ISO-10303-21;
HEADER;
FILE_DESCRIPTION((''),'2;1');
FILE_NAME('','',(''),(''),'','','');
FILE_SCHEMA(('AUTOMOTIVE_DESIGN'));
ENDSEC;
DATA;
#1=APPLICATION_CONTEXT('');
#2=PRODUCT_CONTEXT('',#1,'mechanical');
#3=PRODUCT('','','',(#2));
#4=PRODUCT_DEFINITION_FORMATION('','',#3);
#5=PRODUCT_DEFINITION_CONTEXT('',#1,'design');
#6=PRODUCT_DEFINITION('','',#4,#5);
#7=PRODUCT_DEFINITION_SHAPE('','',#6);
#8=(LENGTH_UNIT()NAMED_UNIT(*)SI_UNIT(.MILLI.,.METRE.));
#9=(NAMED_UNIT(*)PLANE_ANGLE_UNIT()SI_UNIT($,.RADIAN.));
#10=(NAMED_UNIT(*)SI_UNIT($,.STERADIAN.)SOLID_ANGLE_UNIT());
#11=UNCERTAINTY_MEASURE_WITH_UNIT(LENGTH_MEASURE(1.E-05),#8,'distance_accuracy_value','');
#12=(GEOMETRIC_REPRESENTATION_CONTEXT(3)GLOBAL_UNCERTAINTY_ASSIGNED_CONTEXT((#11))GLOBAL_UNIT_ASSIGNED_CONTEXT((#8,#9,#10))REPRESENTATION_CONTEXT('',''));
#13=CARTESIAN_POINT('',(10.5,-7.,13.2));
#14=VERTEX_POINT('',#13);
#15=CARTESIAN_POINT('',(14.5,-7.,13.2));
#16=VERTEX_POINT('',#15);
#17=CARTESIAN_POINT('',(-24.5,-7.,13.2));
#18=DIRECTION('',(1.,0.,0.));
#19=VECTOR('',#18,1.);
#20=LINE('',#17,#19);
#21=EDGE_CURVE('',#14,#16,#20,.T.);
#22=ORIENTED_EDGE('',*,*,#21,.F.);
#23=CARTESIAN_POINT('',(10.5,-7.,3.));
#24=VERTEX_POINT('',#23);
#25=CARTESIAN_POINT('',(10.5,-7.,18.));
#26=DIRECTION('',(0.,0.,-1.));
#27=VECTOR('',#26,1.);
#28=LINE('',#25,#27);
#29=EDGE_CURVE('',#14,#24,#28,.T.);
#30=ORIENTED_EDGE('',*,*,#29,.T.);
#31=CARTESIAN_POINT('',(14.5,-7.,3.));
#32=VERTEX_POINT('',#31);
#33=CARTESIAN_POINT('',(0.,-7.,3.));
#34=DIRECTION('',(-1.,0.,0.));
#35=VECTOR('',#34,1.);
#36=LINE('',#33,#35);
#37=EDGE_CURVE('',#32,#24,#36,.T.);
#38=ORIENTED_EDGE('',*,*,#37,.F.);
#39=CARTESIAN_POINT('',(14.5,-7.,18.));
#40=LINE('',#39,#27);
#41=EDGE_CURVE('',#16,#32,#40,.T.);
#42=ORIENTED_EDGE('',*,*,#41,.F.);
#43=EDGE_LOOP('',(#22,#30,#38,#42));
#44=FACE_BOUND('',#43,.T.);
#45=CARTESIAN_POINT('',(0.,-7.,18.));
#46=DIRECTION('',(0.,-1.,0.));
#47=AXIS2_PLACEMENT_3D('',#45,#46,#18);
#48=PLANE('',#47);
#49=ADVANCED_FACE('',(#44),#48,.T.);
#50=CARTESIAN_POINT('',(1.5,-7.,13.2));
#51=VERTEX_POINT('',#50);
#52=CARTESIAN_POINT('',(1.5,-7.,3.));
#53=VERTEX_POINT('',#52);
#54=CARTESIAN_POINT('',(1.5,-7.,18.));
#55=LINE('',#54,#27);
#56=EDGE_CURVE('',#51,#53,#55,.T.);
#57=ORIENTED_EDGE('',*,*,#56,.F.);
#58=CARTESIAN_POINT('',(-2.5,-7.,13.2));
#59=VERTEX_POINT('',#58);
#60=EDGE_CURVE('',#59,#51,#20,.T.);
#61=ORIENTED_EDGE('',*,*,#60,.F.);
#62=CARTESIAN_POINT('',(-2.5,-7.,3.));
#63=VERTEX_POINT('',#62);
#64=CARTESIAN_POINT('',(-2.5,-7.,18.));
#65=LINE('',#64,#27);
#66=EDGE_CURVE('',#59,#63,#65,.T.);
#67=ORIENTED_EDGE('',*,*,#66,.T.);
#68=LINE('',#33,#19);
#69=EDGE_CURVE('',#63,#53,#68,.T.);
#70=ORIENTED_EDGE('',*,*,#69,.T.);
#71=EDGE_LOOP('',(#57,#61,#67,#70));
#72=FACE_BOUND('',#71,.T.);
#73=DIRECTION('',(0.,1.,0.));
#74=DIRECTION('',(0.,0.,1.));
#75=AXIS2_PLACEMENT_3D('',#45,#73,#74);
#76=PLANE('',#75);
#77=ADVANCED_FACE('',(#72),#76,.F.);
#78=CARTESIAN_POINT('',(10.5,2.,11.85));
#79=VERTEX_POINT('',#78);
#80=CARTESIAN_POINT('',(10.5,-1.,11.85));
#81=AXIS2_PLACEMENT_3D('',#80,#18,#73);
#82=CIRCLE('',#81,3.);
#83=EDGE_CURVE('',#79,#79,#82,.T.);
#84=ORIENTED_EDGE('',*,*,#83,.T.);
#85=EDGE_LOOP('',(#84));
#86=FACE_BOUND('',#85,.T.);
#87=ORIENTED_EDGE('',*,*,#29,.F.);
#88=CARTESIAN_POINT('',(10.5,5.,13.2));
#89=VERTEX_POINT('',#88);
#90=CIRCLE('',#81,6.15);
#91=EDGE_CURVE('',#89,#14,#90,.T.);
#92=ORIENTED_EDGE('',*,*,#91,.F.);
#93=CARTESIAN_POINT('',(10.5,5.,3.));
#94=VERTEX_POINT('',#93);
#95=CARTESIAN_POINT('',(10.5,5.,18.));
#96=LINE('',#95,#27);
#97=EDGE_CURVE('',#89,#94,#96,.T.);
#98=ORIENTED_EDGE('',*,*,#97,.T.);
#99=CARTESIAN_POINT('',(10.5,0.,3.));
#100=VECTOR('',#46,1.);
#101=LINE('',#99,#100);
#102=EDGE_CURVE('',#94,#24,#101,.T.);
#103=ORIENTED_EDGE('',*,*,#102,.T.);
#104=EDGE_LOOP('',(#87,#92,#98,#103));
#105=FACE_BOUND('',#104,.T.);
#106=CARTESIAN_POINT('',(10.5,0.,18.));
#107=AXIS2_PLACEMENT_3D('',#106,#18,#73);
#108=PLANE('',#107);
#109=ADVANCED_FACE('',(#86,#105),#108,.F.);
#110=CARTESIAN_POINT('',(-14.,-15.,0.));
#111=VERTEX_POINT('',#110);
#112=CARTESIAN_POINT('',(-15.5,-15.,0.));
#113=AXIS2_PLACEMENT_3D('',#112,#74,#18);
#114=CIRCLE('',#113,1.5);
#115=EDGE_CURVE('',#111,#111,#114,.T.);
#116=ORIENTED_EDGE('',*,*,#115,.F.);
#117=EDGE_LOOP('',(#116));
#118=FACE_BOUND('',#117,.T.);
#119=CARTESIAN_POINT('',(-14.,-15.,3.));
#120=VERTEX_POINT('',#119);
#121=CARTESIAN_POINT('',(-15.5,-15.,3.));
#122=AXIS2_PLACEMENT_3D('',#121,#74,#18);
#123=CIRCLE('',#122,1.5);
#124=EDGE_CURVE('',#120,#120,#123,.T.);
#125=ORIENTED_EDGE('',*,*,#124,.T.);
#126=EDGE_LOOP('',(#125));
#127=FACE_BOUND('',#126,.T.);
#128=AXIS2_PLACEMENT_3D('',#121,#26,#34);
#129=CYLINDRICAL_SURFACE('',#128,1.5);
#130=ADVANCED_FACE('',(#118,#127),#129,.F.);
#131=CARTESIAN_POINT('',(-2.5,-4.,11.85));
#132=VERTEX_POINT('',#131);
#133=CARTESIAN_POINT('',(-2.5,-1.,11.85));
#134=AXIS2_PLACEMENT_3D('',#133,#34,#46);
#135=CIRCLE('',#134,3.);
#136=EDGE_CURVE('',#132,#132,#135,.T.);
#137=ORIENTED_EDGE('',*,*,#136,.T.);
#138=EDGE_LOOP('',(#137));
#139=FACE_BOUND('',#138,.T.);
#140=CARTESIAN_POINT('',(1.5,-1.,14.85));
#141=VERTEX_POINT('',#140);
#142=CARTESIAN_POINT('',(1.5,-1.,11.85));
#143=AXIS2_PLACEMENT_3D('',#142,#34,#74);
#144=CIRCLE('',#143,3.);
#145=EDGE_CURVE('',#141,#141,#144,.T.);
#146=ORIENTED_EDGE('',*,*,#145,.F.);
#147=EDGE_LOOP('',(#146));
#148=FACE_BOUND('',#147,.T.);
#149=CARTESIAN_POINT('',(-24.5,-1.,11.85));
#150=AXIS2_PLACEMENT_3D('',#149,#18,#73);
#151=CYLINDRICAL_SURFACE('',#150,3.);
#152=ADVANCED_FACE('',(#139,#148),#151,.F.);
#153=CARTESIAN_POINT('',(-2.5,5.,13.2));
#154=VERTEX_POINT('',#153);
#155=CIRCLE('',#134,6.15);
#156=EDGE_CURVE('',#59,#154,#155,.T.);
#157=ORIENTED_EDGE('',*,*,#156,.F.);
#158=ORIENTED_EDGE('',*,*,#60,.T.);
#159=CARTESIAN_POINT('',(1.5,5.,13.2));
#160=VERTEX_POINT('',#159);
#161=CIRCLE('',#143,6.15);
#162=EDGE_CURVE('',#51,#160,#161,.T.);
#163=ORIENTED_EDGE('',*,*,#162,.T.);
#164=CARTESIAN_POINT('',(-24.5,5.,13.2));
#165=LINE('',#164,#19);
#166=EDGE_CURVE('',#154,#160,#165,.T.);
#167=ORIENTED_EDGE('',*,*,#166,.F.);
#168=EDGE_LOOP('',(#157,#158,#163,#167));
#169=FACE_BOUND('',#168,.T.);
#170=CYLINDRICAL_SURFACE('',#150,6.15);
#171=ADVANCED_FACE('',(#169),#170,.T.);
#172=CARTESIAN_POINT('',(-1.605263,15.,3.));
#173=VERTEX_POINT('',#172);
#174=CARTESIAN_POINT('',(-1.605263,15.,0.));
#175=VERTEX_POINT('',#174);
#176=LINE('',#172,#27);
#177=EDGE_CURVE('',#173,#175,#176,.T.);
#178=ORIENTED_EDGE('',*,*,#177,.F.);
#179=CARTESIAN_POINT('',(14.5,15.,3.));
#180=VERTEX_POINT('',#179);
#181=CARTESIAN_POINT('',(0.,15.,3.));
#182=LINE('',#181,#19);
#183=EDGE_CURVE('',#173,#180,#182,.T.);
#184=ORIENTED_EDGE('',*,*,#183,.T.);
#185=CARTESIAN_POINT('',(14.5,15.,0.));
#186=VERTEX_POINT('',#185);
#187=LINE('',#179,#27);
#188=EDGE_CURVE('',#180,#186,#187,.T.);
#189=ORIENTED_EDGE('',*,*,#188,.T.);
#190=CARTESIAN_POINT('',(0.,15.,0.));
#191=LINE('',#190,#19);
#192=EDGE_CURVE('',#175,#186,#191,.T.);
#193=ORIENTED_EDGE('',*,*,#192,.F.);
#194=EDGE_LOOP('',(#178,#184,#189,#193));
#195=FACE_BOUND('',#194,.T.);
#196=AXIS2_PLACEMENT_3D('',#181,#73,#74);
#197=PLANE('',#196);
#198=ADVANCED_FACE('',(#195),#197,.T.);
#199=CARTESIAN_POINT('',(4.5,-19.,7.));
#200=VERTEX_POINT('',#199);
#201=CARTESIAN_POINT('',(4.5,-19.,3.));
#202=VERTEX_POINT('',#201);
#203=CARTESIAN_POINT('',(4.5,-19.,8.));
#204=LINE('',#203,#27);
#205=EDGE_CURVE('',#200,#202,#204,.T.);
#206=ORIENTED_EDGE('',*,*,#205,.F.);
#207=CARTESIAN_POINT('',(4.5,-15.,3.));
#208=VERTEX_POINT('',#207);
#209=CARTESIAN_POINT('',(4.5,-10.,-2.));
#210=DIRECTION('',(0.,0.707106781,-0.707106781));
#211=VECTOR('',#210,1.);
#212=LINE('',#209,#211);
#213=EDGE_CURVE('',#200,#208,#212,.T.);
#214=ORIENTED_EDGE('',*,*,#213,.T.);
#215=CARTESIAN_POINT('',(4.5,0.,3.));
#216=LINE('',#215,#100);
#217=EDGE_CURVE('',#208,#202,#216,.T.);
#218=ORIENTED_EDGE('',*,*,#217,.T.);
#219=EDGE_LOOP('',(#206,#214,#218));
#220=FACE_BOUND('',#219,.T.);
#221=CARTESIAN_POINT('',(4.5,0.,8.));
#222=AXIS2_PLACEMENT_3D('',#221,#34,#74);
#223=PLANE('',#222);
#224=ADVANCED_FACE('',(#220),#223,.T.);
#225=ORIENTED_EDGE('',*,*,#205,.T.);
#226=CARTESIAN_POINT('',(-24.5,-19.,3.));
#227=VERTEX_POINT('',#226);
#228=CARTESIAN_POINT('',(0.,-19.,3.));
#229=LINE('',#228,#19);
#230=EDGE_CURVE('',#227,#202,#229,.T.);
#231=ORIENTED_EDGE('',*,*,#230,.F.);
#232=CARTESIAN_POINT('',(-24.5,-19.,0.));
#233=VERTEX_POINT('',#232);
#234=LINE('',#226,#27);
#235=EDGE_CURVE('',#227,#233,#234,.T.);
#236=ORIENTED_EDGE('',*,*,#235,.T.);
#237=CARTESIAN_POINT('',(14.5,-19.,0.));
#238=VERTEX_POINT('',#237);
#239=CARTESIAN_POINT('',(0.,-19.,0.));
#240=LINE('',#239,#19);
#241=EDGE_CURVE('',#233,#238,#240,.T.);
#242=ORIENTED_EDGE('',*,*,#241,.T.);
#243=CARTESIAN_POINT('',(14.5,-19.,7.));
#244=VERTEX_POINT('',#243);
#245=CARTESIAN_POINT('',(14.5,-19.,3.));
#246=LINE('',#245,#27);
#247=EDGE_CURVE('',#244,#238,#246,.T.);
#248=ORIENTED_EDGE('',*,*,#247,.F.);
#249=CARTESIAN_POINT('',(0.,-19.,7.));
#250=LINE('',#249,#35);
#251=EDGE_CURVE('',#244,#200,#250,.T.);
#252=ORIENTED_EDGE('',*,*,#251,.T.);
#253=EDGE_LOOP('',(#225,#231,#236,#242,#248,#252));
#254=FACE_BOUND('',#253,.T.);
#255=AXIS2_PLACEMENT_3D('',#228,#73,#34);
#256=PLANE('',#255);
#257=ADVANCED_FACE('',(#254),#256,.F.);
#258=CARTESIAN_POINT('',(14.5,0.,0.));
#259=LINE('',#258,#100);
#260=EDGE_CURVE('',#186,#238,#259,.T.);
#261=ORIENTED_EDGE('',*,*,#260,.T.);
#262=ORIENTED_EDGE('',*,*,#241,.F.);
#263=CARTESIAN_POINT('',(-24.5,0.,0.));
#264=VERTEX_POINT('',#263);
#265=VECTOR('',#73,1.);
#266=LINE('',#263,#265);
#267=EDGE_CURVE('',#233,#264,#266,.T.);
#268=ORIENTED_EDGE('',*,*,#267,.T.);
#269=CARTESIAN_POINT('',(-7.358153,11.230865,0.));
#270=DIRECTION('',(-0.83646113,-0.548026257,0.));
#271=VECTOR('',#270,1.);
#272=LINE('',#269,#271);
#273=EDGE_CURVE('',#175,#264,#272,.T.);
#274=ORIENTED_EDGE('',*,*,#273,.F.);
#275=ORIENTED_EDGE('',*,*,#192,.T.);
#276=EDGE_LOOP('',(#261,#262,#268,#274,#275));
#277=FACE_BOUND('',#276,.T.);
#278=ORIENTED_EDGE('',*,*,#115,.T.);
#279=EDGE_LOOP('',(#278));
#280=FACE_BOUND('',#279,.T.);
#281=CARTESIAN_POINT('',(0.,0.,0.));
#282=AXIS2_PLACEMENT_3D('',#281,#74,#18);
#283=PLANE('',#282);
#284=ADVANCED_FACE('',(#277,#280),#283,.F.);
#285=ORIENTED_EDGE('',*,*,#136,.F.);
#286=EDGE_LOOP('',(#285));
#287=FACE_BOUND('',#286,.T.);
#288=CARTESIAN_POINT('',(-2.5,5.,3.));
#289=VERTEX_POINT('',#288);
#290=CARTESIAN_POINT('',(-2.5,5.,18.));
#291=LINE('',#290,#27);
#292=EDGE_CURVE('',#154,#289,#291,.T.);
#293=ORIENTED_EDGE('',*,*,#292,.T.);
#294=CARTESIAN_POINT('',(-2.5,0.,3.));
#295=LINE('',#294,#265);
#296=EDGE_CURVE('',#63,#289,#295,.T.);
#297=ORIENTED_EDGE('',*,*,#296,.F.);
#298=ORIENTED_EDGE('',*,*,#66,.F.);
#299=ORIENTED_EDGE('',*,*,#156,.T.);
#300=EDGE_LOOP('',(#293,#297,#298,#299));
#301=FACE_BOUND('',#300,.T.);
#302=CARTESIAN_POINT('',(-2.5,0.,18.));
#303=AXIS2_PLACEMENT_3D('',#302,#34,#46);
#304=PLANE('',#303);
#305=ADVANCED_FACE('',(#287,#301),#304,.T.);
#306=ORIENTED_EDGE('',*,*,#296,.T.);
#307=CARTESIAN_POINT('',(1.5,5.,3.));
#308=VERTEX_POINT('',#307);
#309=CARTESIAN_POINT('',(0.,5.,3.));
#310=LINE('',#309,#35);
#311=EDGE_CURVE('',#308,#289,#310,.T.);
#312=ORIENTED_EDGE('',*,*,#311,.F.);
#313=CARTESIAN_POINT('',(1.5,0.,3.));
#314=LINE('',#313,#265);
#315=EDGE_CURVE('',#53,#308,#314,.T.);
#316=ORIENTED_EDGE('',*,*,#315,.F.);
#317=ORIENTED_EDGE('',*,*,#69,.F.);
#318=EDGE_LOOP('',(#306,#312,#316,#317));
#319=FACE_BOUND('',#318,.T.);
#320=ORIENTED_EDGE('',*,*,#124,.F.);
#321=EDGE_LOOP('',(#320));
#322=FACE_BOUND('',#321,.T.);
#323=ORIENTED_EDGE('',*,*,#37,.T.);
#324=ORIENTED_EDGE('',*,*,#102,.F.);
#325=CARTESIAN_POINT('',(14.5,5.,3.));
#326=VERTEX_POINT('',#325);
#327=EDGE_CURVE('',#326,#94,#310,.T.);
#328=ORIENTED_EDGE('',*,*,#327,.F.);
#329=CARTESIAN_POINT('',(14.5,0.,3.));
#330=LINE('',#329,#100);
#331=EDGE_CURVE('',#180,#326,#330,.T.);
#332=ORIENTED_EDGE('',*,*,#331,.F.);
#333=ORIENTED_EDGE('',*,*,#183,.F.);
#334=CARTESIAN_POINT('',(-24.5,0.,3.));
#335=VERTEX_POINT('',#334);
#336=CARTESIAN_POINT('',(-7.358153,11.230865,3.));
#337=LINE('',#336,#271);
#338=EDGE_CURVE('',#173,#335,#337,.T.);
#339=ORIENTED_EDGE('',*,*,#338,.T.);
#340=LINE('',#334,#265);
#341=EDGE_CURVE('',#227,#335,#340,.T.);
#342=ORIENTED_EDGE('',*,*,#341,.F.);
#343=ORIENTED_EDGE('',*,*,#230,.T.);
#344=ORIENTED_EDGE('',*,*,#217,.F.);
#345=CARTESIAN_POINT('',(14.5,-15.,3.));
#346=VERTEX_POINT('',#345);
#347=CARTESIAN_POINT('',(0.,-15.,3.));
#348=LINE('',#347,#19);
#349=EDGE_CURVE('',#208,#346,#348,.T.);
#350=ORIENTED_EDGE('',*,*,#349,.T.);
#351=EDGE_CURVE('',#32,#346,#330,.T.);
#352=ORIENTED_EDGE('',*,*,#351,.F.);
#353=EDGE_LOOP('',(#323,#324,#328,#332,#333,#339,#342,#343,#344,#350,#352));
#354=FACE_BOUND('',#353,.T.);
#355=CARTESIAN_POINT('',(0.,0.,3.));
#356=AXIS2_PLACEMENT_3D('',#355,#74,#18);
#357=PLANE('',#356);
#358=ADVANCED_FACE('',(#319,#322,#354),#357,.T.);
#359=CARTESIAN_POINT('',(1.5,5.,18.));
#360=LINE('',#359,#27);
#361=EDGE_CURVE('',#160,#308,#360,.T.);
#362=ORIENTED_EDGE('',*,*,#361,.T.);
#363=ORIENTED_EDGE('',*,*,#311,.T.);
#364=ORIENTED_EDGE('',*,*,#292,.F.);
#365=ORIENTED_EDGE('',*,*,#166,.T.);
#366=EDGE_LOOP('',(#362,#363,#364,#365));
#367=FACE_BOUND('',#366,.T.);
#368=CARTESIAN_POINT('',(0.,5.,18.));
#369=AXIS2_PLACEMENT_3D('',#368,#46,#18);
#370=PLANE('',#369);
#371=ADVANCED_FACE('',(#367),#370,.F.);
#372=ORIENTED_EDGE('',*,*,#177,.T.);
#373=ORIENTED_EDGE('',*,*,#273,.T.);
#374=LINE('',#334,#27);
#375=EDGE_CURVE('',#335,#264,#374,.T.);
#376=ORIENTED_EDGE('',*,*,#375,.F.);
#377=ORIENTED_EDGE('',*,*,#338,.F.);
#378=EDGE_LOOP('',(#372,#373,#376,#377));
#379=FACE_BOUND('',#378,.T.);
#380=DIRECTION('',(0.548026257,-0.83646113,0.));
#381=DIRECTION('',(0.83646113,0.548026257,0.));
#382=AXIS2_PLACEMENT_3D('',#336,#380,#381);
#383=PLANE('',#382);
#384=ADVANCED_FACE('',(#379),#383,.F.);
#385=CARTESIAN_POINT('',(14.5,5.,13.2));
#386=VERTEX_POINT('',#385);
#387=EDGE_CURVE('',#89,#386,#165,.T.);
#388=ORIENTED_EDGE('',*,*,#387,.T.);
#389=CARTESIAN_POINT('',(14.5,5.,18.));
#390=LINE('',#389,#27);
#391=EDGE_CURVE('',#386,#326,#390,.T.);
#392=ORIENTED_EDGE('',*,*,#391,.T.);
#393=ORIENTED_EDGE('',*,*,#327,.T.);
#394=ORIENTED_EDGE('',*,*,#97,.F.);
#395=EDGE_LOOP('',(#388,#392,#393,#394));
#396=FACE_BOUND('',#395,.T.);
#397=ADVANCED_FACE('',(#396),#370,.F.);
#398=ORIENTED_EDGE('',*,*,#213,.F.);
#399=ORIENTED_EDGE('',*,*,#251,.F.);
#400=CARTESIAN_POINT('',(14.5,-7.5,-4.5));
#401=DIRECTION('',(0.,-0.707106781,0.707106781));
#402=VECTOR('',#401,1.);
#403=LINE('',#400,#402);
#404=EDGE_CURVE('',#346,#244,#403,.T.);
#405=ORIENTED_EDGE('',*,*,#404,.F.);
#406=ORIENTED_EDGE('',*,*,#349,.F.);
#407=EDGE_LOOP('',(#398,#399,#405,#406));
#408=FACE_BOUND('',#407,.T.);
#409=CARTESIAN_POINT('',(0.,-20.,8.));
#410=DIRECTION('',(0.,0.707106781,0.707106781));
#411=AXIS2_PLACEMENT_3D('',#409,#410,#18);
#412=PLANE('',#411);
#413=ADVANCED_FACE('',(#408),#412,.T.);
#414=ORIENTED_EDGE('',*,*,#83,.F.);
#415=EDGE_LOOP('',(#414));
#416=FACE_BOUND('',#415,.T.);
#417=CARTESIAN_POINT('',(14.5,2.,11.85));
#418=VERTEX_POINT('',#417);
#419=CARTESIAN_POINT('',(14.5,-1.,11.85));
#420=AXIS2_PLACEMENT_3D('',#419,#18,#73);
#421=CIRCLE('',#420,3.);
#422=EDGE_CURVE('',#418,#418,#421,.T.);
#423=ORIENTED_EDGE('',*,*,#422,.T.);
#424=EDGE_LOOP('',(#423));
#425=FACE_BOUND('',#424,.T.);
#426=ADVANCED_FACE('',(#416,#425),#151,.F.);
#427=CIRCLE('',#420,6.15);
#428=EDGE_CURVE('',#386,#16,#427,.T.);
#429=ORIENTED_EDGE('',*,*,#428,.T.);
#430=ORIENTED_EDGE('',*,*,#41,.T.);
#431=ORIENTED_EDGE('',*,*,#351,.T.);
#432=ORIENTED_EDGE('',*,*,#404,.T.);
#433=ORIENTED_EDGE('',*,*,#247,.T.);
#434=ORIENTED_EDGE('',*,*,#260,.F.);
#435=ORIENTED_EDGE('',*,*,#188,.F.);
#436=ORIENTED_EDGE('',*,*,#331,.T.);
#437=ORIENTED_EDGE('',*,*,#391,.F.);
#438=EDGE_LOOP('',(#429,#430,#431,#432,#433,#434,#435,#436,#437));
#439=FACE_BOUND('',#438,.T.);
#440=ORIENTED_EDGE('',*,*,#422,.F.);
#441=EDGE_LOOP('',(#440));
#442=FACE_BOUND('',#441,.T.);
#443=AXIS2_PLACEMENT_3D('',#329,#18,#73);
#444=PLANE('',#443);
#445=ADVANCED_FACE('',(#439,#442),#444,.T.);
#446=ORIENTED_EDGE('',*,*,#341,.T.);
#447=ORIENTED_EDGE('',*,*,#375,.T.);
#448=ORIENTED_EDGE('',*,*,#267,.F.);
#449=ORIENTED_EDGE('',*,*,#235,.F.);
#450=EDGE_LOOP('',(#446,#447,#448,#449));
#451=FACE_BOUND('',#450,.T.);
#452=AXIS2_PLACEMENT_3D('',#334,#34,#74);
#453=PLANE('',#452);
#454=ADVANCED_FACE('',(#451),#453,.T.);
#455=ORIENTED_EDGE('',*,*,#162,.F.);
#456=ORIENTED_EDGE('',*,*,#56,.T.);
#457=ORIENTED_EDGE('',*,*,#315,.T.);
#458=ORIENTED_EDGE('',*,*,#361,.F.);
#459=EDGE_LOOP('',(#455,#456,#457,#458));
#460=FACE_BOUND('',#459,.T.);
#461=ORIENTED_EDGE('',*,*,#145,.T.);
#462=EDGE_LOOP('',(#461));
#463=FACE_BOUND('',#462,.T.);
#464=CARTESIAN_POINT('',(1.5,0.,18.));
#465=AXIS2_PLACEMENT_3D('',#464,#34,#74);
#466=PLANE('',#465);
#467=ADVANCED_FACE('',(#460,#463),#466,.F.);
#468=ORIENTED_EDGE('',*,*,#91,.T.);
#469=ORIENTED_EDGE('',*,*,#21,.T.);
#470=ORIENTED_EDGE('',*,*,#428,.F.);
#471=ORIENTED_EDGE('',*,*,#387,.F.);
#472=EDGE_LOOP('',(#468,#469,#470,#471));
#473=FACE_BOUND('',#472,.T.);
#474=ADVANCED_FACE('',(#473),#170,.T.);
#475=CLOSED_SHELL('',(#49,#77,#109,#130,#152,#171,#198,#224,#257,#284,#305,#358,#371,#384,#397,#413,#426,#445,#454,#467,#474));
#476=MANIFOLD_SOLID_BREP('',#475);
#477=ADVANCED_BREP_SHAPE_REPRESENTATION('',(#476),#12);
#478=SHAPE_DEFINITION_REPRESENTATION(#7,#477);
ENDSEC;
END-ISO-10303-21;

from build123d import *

# Parameters (mm, degrees)
ESBO_O1_W                  = 10
ESBO_O1_H                  = 4
RESSALTO_EXTRUS_O1_DEPTH   = 3
ESBO_O1_8_W                = 4
ESBO_O1_8_H                = 12
RESSALTO_EXTRUS_O2_DEPTH   = 18
CORTE_EXTRUS_O1_DEPTH      = 47.968074263
CORTE_EXTRUS_O1_DEPTH_BACK = 47.968074263
ESBO_O2_R                  = 3
ESBO_O1_9_W                = 10
ESBO_O1_9_H                = 4
RESSALTO_EXTRUS_O3_DEPTH   = 8
CHANFRO1_SIZE              = 5


with BuildPart() as part:
    # Esboço1 → Ressalto-extrusão1 (new body)
    # profile 1 of 2: a face of its own
    with BuildSketch(Plane.XY):
        Polygon((-24.5, -15), (-24.5, -19), (-15.5, -19), (4.5, -19), (4.5, -15), (14.5, -15), (14.5, -7), (10.5, -7), (10.5, 5), (14.5, 5), (14.5, 15), (1.5, 15), (-1.605263158, 15), (-24.5, 0), align=None)
        with BuildLine():
            ThreePointArc((-15.5, -16.5), (-16.560660172, -16.060660172), (-17, -15))
            ThreePointArc((-17, -15), (-15.5, -13.5), (-14, -15))
            ThreePointArc((-14, -15), (-14.439339828, -16.060660172), (-15.5, -16.5))
        make_face(mode=Mode.SUBTRACT)
        Polygon((-2.5, 5), (1.5, 5), (1.5, -7), (-2.5, -7), (-2.5, 0), align=None, mode=Mode.SUBTRACT)
    # profile 2 of 2: a face of its own
    with BuildSketch(Plane.XY):
        with Locations((9.5, -17)):
            Rectangle(ESBO_O1_W, ESBO_O1_H)
    extrude(amount=RESSALTO_EXTRUS_O1_DEPTH)

    # Esboço1<8> → Ressalto-extrusão2 (add)
    with BuildSketch(Plane.XY):
        Polygon((10.5, -7), (14.5, -7), (14.5, -2), (14.5, 5), (10.5, 5), align=None)
        with Locations((-0.5, -1)):
            Rectangle(ESBO_O1_8_W, ESBO_O1_8_H)
    extrude(amount=RESSALTO_EXTRUS_O2_DEPTH)

    # Esboço2 → Corte-extrusão1 (cut, two sides: drawn at the far end of the back side and taken through both)
    with BuildSketch(Plane(origin=(14.5, 0, 0), x_dir=(0, 0, -1), z_dir=(1, 0, 0)).offset(-CORTE_EXTRUS_O1_DEPTH_BACK)):
        with BuildLine():
            ThreePointArc((-18, -1), (-16.652343178, 2.841874542), (-13.2, 5))
            Line((-13.2, 5), (-18, 5))
            Line((-18, 5), (-18, -1))
        make_face()
        with BuildLine():
            ThreePointArc((-13.2, -7), (-16.652343178, -4.841874542), (-18, -1))
            Line((-18, -1), (-18, -7))
            Line((-18, -7), (-13.2, -7))
        make_face()
        with Locations(Location((-11.85, -1, 0), (0, 0, 180))):
            Circle(ESBO_O2_R)
    extrude(amount=CORTE_EXTRUS_O1_DEPTH + CORTE_EXTRUS_O1_DEPTH_BACK, mode=Mode.SUBTRACT)

    # Esboço1<9> → Ressalto-extrusão3 (add)
    with BuildSketch(Plane.XY):
        with Locations((9.5, -17)):
            Rectangle(ESBO_O1_9_W, ESBO_O1_9_H)
    extrude(amount=RESSALTO_EXTRUS_O3_DEPTH)

    # Chanfro1
    # the kernel refuses this chamfer: 5 mm, written as the material it takes off along each edge
    with BuildSketch(Plane(origin=(27.35841494, -15, 8), x_dir=(0, 0.027495876610586317, -0.9996219169112968), z_dir=(-1, 0, 0))) as chanfro1_piece_1_section:
        Polygon((CHANFRO1_SIZE * 0.999621916911, CHANFRO1_SIZE * 0.0274958766106), (-CHANFRO1_SIZE * 0.0274958766106, CHANFRO1_SIZE * 0.999621916911), (0, 0), align=None)
    chanfro1_piece_1 = extrude(amount=35.71682988, mode=Mode.PRIVATE)
    chanfro1_piece_1 = split(chanfro1_piece_1, bisect_by=Plane(origin=(9.5, -16.652020772, 3), z_dir=(0, 0, 1)), keep=Keep.TOP, mode=Mode.PRIVATE)
    add(chanfro1_piece_1, mode=Mode.SUBTRACT)


solid = part.part
